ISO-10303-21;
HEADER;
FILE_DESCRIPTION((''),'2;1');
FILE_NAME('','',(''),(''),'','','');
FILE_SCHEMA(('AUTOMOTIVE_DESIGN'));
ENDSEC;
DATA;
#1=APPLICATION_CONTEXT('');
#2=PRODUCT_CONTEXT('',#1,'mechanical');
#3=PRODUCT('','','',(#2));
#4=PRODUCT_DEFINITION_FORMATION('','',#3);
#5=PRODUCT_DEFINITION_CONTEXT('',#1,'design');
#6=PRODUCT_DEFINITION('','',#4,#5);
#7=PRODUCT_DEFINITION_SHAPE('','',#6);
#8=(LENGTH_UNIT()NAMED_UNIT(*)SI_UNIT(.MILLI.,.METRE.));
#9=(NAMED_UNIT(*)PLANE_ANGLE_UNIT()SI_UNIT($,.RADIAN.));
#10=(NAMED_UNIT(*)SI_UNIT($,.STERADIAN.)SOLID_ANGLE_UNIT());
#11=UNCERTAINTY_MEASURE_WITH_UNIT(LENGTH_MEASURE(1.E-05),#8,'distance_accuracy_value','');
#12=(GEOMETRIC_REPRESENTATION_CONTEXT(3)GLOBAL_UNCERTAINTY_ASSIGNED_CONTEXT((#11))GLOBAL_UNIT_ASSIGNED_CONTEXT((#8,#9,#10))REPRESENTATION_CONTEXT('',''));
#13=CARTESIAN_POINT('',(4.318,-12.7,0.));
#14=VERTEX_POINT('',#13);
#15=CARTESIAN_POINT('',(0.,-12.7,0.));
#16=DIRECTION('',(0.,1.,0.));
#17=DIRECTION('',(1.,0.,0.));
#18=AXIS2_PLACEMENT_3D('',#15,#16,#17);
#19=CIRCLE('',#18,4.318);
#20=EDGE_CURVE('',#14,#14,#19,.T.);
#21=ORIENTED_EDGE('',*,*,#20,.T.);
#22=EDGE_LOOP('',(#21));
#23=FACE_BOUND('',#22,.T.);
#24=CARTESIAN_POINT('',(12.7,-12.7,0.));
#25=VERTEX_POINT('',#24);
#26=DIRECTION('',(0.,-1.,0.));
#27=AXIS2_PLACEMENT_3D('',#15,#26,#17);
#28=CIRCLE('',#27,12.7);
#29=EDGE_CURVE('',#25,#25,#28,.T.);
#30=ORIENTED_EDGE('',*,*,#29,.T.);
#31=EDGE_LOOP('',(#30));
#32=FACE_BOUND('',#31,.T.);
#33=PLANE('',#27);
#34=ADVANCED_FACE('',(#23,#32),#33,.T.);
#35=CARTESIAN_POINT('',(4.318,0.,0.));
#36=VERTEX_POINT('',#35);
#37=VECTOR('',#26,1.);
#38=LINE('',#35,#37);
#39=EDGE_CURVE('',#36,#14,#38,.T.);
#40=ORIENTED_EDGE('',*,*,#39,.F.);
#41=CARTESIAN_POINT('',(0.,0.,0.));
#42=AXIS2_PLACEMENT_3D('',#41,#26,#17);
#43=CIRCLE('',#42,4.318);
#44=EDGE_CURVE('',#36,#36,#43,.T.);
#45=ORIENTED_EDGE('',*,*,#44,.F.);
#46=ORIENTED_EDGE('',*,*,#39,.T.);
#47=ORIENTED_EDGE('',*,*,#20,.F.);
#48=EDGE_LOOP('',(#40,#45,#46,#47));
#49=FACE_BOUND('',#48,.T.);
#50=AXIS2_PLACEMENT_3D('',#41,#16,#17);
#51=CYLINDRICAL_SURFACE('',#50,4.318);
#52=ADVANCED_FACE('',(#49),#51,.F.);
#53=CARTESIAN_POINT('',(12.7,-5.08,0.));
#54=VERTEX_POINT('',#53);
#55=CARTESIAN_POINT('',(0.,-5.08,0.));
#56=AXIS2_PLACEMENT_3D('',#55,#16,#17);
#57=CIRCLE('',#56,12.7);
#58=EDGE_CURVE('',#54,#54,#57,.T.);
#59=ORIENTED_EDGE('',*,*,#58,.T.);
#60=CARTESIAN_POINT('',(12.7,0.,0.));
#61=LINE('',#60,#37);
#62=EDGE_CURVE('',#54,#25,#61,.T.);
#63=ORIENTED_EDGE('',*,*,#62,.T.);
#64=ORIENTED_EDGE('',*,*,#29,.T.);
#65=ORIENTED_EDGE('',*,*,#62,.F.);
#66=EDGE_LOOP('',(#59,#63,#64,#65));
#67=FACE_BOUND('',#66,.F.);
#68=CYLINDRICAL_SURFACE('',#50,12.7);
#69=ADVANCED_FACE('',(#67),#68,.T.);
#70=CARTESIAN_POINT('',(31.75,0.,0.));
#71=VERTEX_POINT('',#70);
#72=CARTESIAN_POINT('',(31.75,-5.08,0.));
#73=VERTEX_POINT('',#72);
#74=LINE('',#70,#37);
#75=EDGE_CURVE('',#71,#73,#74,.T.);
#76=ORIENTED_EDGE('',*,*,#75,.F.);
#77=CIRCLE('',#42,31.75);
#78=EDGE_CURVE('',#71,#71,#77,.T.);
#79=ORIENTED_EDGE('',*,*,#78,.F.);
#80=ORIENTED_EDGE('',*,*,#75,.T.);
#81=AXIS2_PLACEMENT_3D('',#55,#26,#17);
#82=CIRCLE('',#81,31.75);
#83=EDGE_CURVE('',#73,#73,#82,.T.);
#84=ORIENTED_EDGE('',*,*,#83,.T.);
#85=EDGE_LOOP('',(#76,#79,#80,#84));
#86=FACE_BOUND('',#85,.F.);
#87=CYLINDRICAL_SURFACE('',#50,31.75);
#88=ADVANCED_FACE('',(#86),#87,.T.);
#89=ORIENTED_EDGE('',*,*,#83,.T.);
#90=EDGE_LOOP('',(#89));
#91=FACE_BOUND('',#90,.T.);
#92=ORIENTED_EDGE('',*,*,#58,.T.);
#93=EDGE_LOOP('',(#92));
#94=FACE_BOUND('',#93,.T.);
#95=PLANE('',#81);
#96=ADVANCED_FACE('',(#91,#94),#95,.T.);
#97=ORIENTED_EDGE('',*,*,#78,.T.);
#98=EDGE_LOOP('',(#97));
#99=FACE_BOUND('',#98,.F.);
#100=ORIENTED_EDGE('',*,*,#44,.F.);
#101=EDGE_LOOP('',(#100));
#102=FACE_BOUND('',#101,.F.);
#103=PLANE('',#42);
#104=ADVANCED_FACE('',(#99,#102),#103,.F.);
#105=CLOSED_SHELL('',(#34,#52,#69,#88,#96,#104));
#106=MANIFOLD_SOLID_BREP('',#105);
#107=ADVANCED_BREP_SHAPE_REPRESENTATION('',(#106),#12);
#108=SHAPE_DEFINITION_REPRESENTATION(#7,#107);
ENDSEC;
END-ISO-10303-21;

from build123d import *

# Parameters (mm, degrees)
F0_R          = 12.7
F1_DEPTH      = 12.7
F2_R          = 31.75
F3_DEPTH      = 5.08
F4_R          = 4.318
F5_DEPTH      = 12.701
F5_DEPTH_BACK = 95


# Not quite as in the source:
# - an extrude ends at something that could not be found from the text; its depth is read off the source's solid


with BuildPart() as f1:
    # F0 (on Front) → F1 (new body)
    with BuildSketch(Plane.XZ):
        Circle(F0_R)
    extrude(amount=F1_DEPTH)

    # F2 (on Front) → F3 (join)
    with BuildSketch(Plane.XZ):
        Circle(F2_R)
    extrude(amount=F3_DEPTH)

    # F4 (on Front) → F5 (cut, two sides)
    with BuildSketch(Plane.XZ) as f5_sk:
        Circle(F4_R)
    extrude(amount=F5_DEPTH, mode=Mode.SUBTRACT)
    extrude(f5_sk.sketch, amount=-F5_DEPTH_BACK, mode=Mode.SUBTRACT)


solid = f1.part
